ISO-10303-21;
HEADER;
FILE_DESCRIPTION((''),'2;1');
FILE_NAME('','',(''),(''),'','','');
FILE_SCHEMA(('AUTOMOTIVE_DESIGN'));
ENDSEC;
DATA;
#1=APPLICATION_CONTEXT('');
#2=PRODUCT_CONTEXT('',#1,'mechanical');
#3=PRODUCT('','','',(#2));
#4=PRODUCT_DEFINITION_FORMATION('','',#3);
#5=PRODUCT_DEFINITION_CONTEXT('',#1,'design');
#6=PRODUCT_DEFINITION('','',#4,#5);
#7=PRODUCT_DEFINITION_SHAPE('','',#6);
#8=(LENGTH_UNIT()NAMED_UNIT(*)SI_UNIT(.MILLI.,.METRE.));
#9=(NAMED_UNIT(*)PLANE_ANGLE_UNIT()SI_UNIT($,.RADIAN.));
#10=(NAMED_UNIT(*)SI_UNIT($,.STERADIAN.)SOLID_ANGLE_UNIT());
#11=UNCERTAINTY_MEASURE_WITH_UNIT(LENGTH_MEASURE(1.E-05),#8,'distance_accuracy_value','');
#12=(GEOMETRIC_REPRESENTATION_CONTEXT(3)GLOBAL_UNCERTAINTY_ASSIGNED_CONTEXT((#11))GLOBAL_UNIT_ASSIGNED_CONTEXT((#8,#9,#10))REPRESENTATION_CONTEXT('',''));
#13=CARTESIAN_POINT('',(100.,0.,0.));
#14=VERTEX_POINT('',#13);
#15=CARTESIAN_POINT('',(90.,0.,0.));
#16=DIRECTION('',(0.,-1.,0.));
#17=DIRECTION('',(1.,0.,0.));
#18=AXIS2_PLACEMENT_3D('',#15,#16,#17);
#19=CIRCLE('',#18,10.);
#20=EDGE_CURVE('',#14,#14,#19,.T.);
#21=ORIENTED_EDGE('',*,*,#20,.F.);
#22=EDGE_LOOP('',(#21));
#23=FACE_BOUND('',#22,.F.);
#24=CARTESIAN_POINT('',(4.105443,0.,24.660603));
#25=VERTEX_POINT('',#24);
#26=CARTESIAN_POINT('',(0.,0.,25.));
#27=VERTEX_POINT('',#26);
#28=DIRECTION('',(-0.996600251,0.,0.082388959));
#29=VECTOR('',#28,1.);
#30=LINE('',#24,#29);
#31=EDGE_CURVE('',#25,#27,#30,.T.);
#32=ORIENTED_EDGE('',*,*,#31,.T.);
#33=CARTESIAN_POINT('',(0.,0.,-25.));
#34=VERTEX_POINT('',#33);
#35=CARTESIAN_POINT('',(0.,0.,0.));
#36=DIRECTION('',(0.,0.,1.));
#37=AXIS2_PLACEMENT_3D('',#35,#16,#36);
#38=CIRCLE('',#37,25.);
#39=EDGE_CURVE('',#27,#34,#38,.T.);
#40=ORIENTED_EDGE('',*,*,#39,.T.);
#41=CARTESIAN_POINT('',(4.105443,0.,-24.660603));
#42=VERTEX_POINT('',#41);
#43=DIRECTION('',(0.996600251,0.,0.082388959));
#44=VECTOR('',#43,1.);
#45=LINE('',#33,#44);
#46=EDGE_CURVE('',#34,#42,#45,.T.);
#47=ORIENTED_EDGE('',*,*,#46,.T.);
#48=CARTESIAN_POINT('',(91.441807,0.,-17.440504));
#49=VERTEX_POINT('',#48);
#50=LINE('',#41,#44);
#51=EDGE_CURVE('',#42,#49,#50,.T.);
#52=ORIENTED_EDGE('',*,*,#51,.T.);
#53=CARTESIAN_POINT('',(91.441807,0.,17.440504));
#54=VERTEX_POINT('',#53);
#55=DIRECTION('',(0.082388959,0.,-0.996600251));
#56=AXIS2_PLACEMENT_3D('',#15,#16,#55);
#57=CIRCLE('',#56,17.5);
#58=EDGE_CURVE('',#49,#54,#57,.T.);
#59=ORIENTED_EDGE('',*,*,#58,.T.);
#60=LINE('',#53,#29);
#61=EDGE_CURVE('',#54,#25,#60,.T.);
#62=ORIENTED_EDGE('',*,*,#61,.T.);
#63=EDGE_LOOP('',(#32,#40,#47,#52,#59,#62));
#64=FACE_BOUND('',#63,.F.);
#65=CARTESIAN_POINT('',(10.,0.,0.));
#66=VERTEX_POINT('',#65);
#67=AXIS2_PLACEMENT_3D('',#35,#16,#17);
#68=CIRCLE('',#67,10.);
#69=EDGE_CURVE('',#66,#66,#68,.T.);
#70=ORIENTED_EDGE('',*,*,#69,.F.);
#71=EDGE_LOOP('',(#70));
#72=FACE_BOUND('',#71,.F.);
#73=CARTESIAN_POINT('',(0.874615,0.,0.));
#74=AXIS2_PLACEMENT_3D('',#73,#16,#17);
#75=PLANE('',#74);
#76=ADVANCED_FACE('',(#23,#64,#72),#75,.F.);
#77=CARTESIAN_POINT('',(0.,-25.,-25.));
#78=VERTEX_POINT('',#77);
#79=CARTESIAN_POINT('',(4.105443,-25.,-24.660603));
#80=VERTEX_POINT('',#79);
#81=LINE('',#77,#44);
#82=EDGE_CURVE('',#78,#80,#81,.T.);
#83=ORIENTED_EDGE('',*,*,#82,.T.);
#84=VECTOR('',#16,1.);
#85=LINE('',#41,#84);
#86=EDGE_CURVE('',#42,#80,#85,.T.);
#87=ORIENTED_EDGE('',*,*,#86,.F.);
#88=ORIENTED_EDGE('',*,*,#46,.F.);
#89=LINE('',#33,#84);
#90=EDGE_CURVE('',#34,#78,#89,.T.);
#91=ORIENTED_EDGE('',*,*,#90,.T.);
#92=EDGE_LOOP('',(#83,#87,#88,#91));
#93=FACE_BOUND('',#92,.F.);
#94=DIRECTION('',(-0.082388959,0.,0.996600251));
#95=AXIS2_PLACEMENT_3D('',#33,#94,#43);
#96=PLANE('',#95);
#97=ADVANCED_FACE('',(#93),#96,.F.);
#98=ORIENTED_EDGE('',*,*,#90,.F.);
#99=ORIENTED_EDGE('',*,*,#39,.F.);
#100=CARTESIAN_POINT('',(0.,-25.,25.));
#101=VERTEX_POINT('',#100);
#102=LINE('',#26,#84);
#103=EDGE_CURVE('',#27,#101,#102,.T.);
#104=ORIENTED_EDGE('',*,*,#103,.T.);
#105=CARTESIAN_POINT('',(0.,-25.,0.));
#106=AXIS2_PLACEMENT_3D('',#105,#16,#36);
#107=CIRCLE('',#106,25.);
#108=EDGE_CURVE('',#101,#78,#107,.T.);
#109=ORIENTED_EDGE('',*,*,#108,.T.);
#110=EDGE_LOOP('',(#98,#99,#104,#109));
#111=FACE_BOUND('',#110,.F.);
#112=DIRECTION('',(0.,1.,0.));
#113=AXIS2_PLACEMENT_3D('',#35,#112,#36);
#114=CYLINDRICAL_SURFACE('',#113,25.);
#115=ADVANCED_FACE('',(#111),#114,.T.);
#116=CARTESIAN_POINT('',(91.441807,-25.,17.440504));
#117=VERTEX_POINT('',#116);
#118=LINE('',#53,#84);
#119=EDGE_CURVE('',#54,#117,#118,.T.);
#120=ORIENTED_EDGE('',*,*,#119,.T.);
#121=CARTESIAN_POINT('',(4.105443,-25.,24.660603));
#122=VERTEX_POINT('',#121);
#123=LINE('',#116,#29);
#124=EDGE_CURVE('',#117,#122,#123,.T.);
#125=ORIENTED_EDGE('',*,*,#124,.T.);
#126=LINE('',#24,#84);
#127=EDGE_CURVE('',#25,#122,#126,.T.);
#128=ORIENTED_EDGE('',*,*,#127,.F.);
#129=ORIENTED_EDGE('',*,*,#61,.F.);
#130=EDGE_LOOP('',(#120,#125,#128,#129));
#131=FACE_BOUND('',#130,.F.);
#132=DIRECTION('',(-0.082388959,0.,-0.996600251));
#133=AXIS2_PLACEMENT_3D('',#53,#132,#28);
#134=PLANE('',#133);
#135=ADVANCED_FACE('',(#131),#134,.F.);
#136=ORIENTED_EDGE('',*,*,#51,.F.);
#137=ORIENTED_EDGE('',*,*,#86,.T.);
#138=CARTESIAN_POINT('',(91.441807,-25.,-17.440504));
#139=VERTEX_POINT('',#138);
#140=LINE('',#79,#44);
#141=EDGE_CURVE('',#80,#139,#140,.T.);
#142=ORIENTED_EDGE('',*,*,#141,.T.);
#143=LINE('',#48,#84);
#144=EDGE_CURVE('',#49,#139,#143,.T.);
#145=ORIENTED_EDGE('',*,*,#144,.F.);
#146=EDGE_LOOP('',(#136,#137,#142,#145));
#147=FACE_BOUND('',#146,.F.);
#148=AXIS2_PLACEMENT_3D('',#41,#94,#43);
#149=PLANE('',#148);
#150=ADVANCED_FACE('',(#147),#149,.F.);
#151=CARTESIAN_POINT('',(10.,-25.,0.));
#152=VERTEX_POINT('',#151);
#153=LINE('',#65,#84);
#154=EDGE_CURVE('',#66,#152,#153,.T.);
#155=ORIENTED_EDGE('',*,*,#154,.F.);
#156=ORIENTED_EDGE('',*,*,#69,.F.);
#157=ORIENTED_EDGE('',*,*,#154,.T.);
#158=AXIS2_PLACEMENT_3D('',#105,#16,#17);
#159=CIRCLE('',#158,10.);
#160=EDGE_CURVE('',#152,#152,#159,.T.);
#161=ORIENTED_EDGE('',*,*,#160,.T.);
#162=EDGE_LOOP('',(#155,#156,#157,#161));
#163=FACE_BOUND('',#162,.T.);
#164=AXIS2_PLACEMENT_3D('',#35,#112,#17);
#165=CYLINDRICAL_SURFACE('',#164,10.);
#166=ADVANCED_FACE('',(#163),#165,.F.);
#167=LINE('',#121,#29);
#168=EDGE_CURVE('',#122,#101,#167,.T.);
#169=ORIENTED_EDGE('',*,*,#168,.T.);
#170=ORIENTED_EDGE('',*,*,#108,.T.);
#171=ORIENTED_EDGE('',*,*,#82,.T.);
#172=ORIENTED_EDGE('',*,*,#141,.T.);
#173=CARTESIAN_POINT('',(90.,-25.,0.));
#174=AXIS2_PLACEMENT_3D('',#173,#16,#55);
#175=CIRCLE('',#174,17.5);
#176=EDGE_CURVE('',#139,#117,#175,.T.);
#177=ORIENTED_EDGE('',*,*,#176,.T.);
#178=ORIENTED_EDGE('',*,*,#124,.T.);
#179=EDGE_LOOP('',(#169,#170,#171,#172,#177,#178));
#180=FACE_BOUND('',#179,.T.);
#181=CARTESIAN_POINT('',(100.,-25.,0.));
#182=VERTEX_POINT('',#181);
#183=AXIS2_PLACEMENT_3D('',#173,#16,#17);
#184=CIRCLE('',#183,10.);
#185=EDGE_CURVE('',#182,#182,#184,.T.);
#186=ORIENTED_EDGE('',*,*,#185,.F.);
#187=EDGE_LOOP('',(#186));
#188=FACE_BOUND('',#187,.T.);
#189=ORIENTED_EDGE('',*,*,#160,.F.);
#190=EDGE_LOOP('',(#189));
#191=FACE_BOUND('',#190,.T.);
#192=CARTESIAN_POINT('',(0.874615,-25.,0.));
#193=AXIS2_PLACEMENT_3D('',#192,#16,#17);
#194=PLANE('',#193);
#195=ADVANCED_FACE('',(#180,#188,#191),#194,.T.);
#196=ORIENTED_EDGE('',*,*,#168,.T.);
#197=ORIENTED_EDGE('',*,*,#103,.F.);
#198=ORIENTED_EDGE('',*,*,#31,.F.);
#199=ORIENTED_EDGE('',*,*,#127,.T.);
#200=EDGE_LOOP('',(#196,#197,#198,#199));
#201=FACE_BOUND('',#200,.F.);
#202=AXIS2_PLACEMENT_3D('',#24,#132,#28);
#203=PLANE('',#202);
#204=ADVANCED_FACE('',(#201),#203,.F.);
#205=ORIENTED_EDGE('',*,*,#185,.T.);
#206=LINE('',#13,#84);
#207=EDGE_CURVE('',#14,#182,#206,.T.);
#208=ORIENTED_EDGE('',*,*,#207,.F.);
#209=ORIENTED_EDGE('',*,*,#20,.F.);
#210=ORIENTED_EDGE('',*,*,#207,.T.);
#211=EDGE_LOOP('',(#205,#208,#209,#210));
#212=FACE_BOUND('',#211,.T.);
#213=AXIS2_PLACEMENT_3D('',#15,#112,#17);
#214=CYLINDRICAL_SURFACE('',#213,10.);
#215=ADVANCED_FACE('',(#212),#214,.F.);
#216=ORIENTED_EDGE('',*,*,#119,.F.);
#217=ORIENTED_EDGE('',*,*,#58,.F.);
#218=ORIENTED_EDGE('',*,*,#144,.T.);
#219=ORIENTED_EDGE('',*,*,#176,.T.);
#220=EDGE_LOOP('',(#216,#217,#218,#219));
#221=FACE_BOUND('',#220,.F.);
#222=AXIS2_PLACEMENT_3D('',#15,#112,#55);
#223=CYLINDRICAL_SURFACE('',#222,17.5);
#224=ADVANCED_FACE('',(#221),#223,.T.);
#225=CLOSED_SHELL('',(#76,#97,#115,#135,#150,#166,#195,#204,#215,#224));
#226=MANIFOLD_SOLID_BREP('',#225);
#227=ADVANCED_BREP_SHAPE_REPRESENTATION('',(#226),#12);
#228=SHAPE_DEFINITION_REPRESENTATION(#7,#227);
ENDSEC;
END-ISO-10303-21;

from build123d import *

# Parameters (mm, degrees)
F0_R     = 10
F1_DEPTH = 25


with BuildPart() as f1:
    # F0 (on Front) → F1 (new body)
    with BuildSketch(Plane.XZ):
        with BuildLine():
            Line((4.1054428346, 24.6606029758), (0, 25))
            ThreePointArc((0, 25), (-25, 0), (0, -25))
            Line((0, -25), (4.1054428346, -24.6606029758))
            ThreePointArc((4.1054428346, -24.6606029758), (19.0740146648, -16.1611251022), (25, 0))
            ThreePointArc((25, 0), (19.0740146648, 16.1611251022), (4.1054428346, 24.6606029758))
        make_face()
        Circle(F0_R, mode=Mode.SUBTRACT)
        with BuildLine():
            Line((91.4418067738, 17.4405043857), (4.1054428346, 24.6606029758))
            ThreePointArc((4.1054428346, 24.6606029758), (19.0740146648, 16.1611251022), (25, 0))
            ThreePointArc((25, 0), (19.0740146648, -16.1611251022), (4.1054428346, -24.6606029758))
            Line((4.1054428346, -24.6606029758), (91.4418067738, -17.4405043857))
            ThreePointArc((91.4418067738, -17.4405043857), (72.5, 0), (91.4418067738, 17.4405043857))
        make_face()
        with BuildLine():
            ThreePointArc((107.5, 0), (102.8740362463, 11.8536572723), (91.4418067738, 17.4405043857))
            ThreePointArc((91.4418067738, 17.4405043857), (72.5, 0), (91.4418067738, -17.4405043857))
            ThreePointArc((91.4418067738, -17.4405043857), (102.8740362463, -11.8536572723), (107.5, 0))
        make_face()
        with Locations((90, 0)):
            Circle(F0_R, mode=Mode.SUBTRACT)
    extrude(amount=F1_DEPTH)


solid = f1.part
